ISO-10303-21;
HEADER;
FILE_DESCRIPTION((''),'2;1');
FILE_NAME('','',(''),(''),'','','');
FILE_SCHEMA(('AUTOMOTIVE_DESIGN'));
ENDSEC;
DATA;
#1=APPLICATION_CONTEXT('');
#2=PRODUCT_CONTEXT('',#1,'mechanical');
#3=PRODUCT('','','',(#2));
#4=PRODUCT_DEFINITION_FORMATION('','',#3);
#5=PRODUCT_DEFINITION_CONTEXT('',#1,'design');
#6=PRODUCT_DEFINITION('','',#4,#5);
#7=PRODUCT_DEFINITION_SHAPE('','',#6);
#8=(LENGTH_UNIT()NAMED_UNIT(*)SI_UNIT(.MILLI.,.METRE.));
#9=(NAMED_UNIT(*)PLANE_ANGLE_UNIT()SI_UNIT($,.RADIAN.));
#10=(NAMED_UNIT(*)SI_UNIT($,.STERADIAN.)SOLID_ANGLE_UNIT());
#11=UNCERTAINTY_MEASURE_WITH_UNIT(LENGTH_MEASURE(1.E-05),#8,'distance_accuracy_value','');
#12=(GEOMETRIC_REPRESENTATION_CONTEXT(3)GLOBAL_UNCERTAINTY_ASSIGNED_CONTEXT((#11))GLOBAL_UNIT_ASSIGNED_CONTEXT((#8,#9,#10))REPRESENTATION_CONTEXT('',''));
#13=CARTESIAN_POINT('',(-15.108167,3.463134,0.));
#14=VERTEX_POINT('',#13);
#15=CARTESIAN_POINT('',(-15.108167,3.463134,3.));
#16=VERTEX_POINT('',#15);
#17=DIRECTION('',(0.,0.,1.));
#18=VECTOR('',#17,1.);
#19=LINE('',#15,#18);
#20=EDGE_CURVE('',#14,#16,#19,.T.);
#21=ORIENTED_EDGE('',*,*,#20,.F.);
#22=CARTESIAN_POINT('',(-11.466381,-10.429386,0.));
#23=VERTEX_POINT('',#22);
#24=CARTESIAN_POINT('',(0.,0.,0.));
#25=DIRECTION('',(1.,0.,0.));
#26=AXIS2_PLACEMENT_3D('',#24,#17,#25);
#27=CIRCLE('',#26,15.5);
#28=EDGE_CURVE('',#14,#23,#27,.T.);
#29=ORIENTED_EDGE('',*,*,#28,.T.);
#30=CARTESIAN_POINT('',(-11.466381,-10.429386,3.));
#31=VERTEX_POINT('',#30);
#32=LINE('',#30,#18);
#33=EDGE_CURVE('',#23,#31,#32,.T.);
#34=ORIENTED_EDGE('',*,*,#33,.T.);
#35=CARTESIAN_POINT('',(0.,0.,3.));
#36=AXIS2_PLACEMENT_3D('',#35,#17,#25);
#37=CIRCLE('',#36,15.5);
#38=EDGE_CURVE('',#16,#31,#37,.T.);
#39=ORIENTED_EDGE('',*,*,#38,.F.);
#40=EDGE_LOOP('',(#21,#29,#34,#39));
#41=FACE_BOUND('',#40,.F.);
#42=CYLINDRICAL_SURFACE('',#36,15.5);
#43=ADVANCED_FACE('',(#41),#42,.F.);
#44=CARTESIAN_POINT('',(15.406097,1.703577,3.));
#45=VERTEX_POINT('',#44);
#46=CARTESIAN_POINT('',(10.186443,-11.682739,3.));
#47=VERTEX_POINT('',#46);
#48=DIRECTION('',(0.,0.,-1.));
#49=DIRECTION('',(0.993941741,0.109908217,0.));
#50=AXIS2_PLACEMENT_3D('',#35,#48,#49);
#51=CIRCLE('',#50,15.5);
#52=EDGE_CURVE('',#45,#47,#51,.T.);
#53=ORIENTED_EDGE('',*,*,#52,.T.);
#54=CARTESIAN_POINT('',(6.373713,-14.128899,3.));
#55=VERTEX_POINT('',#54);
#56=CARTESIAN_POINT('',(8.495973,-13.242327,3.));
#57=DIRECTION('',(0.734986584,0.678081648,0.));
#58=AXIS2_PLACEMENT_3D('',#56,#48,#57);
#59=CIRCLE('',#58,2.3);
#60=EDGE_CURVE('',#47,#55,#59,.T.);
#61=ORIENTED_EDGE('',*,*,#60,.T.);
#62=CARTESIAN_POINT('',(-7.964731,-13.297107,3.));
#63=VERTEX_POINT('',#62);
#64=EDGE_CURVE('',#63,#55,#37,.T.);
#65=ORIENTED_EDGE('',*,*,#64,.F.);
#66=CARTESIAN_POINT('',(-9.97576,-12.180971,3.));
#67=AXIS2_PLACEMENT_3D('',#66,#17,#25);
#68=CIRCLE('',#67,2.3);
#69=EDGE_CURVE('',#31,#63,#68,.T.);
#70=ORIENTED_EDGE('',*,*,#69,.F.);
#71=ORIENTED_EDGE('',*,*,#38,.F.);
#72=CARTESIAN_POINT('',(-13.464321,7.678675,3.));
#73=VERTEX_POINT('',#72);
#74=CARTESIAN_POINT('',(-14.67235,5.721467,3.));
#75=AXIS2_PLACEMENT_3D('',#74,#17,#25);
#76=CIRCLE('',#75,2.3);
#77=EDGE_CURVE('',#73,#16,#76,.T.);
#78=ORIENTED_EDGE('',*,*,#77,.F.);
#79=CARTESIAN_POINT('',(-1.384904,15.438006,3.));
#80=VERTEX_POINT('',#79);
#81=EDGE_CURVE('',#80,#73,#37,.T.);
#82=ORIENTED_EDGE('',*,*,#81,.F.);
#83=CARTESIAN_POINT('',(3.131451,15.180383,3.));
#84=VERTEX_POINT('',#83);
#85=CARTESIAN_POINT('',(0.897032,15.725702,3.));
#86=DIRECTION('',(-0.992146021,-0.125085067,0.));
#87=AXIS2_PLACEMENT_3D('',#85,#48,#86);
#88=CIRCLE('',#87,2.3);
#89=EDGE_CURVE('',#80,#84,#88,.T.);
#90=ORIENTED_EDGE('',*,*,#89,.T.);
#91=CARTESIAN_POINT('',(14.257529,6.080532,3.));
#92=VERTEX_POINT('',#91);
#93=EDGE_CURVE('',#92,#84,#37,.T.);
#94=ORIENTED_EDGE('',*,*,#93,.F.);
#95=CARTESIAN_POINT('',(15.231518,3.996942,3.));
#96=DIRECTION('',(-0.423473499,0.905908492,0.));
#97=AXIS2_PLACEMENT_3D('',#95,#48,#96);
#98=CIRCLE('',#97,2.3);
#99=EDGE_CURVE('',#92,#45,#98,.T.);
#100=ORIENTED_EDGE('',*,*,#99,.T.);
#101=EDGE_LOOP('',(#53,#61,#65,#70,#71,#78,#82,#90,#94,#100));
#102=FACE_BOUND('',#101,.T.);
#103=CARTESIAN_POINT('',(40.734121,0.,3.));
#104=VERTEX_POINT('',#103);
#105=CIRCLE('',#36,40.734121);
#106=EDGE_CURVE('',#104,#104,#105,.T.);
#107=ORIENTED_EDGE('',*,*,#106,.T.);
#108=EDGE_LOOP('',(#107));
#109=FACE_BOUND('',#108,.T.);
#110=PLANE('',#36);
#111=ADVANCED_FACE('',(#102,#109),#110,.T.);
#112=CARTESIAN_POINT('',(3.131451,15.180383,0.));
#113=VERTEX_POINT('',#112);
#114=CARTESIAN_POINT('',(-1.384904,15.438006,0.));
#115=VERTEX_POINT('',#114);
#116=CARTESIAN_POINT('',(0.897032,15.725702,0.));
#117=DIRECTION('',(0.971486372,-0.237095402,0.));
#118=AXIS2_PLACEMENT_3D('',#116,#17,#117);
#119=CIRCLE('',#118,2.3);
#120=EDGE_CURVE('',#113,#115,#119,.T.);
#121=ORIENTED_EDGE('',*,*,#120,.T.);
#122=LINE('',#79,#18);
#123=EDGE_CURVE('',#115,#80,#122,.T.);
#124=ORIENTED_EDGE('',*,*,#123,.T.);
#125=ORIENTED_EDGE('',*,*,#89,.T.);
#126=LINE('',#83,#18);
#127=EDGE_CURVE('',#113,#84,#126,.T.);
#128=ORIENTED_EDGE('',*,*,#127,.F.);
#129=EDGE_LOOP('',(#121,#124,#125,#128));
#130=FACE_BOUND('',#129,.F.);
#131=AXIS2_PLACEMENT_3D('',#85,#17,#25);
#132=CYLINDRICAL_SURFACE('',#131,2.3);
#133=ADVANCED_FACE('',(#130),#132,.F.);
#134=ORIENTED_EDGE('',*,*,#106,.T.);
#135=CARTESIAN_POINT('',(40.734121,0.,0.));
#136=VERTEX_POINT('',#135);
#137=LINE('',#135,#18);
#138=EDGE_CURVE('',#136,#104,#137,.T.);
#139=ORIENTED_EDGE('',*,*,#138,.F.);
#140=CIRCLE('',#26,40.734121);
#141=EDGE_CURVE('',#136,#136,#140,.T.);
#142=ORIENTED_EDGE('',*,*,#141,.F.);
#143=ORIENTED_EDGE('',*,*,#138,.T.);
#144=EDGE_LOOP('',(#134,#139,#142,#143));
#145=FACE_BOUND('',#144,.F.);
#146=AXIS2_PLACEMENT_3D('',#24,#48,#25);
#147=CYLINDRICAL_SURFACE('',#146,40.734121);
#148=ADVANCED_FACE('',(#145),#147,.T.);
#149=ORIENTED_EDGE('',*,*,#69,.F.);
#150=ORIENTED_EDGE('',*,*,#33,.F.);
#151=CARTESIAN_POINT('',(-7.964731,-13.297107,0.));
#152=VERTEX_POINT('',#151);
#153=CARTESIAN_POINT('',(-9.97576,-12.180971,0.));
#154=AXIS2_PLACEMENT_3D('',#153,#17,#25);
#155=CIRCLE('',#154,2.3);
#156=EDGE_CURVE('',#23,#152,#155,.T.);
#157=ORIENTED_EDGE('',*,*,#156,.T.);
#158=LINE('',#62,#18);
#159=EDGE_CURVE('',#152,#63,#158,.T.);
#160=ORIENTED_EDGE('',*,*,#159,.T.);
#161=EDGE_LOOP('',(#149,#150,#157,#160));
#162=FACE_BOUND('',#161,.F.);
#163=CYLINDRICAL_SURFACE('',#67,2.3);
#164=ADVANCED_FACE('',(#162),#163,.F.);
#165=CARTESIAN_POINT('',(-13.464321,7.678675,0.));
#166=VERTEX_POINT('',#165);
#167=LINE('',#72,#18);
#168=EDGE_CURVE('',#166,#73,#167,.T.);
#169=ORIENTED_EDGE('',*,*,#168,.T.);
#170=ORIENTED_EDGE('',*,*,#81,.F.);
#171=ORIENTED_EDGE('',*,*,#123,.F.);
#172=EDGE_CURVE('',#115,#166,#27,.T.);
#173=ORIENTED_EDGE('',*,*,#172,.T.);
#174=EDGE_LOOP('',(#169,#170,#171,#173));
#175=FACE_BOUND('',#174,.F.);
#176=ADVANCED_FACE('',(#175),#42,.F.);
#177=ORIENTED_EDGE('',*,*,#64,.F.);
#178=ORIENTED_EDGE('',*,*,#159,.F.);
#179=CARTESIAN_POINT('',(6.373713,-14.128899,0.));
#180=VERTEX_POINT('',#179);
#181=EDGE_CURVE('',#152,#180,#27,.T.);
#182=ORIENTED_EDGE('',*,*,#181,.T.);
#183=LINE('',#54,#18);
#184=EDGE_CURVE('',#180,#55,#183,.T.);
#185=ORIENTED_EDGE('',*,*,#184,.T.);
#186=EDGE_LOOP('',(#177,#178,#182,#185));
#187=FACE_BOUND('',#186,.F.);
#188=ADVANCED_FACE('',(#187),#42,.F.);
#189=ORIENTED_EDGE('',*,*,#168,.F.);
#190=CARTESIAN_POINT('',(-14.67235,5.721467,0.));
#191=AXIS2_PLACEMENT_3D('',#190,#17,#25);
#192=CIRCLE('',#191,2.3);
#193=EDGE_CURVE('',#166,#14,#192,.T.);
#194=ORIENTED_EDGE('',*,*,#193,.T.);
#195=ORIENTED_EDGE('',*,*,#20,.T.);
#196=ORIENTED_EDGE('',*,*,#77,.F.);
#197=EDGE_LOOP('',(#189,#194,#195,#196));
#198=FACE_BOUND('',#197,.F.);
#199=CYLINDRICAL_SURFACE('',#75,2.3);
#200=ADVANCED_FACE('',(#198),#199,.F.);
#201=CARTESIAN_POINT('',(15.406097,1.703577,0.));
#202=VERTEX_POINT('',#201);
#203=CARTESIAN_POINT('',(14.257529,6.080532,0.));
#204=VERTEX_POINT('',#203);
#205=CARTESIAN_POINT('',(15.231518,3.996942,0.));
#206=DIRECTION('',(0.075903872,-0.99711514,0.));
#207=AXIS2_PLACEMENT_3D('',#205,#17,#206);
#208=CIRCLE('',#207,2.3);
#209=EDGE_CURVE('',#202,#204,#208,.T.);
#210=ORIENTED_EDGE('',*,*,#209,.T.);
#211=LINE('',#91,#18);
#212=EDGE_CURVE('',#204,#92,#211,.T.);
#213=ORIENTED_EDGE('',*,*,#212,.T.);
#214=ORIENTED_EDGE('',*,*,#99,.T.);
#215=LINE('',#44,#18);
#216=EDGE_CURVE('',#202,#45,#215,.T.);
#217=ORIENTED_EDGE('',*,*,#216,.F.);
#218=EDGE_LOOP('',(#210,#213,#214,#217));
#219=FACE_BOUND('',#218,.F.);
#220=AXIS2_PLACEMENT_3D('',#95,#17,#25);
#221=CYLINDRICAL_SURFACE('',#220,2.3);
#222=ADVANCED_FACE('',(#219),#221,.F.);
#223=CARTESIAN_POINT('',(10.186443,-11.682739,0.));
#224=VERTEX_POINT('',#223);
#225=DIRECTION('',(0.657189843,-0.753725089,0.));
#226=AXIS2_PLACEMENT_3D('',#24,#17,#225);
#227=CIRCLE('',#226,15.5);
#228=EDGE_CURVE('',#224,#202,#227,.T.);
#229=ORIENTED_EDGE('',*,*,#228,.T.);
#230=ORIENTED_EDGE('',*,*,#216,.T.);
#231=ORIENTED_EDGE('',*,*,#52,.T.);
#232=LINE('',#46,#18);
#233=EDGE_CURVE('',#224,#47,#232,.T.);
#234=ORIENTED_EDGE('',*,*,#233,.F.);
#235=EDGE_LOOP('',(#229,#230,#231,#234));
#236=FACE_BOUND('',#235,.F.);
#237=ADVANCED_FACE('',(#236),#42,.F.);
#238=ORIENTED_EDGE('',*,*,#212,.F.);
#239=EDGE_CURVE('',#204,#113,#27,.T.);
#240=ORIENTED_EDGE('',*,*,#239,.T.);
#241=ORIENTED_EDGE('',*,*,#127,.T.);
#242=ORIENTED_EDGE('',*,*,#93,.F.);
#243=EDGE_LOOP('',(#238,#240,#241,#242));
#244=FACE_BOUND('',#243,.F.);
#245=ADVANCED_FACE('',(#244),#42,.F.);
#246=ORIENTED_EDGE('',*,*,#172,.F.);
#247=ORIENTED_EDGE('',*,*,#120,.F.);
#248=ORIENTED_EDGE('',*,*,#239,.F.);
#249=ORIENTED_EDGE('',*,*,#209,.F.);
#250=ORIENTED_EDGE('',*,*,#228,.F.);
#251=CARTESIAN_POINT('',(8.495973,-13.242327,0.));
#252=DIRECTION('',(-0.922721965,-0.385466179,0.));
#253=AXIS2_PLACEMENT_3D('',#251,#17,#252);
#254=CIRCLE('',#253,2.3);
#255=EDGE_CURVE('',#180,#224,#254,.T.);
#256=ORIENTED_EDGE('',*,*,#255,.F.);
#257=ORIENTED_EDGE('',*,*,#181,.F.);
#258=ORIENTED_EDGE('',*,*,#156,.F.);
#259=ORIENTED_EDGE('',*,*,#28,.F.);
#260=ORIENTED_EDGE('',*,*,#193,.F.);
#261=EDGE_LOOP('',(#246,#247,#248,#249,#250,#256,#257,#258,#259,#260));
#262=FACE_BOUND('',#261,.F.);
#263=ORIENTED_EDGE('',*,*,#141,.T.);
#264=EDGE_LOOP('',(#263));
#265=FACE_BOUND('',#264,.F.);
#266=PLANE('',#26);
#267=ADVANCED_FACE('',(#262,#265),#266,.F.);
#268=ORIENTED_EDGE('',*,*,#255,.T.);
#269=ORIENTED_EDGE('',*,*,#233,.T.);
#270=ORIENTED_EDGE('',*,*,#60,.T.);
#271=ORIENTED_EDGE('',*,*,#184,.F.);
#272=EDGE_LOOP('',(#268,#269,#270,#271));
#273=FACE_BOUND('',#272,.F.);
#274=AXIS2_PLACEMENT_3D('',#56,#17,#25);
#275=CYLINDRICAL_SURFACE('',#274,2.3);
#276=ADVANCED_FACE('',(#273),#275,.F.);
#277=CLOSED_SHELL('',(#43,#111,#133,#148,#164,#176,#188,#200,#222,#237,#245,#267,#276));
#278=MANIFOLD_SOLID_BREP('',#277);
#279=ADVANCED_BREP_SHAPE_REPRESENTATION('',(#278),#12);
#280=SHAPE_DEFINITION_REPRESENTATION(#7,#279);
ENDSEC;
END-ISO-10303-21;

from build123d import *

# Parameters (mm, degrees)
F0_R     = 40.7341209129
F1_DEPTH = 3
F2_R     = 12.35
F3_DEPTH = 5
F4_R     = 15.5
F5_DEPTH = 3
F7_R     = 2.3
F8_DEPTH = 25


# Not quite as in the source:
# - a feature names something its author has since deleted; it is built from what else it names


with BuildPart() as f1:
    # F0 (on Top) → F1 (new body)
    with BuildSketch(Plane.XY):
        Circle(F0_R)
    extrude(amount=F1_DEPTH)

    # F2 (on face) → F3 (cut)
    with BuildSketch(Plane.XY.offset(3)):
        Circle(F2_R)
    extrude(amount=-F3_DEPTH, mode=Mode.SUBTRACT)

    # F4 (on face) → F5 (cut)
    with BuildSketch(Plane.XY.offset(3)):
        Circle(F4_R)
    extrude(amount=-F5_DEPTH, mode=Mode.SUBTRACT)

    # F7 (on face) → F8 (cut)
    with BuildSketch(Plane.XY.offset(3)):
        with Locations((15.2315180749, 3.9969421923)):
            Circle(F7_R)
        with Locations((8.4959734231, -13.2423266768)):
            Circle(F7_R)
        with Locations((-9.9757602438, -12.1809709817)):
            Circle(F7_R)
        with Locations((-14.6723501384, 5.7214666158)):
            Circle(F7_R)
        with Locations((0.8970320341, 15.7257020473)):
            Circle(F7_R)
    extrude(amount=-F8_DEPTH, mode=Mode.SUBTRACT)


solid = f1.part
